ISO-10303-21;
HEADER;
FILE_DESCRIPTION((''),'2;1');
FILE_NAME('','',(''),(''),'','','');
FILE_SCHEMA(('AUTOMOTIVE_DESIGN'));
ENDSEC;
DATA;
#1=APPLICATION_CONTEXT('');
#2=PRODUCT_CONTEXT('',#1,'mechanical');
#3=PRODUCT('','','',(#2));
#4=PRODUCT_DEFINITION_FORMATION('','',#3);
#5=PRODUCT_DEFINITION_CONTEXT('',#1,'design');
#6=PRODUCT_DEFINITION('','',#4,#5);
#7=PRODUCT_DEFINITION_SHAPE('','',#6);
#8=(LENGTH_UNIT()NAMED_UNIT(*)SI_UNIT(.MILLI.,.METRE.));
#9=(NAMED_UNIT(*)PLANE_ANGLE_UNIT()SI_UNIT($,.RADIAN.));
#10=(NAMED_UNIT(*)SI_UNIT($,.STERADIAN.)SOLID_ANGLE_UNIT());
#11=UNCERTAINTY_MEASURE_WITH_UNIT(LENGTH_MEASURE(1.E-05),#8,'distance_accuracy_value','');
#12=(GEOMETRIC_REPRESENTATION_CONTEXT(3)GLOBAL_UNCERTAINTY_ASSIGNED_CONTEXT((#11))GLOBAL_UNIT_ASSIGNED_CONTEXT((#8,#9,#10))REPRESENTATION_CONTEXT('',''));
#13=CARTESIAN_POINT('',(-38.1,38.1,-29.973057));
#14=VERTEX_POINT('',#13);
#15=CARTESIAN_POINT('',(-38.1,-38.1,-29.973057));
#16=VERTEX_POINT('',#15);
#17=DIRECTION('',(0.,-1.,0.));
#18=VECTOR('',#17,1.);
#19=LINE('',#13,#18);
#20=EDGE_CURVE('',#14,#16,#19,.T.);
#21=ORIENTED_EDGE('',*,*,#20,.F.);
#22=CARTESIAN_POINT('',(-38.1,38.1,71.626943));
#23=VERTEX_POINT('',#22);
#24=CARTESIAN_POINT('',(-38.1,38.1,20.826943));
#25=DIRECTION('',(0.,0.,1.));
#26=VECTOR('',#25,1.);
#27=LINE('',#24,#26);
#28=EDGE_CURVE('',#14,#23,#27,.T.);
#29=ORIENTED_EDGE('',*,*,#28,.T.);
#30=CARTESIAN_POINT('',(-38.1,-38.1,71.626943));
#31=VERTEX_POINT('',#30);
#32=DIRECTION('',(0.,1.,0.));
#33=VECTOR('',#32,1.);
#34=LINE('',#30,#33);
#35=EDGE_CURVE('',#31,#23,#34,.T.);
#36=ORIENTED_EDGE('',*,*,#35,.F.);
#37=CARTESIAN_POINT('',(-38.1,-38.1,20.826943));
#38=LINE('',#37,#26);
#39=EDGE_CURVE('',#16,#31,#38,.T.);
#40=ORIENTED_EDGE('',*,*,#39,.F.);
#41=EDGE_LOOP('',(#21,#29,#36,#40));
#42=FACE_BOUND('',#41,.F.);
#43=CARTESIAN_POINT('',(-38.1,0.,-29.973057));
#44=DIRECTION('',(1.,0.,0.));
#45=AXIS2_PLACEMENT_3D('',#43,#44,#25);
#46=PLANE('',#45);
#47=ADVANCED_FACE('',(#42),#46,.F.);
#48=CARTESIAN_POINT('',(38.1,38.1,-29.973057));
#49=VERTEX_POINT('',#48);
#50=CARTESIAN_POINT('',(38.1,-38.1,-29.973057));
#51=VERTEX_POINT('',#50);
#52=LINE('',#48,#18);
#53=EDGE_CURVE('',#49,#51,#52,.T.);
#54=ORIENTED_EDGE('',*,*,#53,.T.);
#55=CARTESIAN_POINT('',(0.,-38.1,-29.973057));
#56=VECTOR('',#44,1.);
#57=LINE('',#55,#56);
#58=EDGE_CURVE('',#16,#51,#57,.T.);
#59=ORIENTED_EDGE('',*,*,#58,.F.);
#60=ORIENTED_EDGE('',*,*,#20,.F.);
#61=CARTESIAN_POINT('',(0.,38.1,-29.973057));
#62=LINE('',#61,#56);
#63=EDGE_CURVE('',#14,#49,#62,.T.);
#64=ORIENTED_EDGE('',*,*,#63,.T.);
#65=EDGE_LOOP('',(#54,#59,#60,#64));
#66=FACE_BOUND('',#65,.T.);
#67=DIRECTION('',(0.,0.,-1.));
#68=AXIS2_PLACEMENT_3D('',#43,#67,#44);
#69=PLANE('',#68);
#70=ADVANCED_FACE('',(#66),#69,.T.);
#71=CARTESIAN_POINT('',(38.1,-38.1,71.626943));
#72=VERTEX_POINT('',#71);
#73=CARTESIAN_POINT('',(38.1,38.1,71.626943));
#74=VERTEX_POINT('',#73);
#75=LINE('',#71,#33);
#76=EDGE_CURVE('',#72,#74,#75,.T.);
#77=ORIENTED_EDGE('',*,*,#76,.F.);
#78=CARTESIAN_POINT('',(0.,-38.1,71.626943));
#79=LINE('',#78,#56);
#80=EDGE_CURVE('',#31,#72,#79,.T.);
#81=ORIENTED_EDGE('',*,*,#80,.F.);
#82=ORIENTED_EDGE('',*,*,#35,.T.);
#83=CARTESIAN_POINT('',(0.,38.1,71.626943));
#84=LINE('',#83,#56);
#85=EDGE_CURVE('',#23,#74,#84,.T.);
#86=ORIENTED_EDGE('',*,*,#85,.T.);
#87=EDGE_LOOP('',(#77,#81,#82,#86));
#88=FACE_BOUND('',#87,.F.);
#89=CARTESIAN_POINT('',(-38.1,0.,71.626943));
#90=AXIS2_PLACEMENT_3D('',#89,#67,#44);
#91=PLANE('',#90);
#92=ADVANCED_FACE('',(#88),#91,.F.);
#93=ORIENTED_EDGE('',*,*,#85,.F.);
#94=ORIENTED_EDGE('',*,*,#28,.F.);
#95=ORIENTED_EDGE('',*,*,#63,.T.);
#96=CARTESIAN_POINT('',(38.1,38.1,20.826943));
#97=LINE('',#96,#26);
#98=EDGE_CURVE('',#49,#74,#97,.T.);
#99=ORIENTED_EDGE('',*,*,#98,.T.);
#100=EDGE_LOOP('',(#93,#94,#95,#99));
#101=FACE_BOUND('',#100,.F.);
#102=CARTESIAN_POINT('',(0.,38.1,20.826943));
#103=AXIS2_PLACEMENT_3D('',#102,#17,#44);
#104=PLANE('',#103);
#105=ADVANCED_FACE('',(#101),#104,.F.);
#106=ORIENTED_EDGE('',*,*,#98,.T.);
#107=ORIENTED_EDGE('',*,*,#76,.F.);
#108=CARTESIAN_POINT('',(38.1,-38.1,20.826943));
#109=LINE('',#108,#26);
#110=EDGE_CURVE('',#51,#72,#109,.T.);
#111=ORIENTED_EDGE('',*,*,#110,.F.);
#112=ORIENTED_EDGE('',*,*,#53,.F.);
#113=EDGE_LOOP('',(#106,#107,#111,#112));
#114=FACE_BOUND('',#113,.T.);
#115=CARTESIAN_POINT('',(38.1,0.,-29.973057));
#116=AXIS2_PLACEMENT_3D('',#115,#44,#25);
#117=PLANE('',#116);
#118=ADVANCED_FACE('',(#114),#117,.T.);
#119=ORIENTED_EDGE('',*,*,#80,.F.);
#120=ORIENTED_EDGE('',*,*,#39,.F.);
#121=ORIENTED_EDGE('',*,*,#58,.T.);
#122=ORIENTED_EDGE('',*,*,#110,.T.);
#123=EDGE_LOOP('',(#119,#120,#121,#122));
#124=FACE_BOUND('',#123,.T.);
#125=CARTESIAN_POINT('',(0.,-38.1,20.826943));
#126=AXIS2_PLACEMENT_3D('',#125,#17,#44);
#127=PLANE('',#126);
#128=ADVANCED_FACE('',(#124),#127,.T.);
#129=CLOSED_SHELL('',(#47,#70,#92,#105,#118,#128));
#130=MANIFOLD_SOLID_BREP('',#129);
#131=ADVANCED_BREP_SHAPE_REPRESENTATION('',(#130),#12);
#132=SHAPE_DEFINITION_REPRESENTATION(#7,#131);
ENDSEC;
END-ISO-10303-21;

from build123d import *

# Parameters (mm, degrees)
F0_W     = 76.2
F0_H     = 101.6
F1_DEPTH = 38.1


# Not quite as in the source:
# - the program builds the solid bodies; features that only make, move or delete a surface that nothing else refers to are left out


with BuildPart() as f1:
    # F0 (on Front) → F1 (new body, symmetric)
    with BuildSketch(Plane.XZ):
        with Locations((0, 20.8269432055)):
            Rectangle(F0_W, F0_H)
    extrude(amount=F1_DEPTH, both=True)


solid = f1.part
